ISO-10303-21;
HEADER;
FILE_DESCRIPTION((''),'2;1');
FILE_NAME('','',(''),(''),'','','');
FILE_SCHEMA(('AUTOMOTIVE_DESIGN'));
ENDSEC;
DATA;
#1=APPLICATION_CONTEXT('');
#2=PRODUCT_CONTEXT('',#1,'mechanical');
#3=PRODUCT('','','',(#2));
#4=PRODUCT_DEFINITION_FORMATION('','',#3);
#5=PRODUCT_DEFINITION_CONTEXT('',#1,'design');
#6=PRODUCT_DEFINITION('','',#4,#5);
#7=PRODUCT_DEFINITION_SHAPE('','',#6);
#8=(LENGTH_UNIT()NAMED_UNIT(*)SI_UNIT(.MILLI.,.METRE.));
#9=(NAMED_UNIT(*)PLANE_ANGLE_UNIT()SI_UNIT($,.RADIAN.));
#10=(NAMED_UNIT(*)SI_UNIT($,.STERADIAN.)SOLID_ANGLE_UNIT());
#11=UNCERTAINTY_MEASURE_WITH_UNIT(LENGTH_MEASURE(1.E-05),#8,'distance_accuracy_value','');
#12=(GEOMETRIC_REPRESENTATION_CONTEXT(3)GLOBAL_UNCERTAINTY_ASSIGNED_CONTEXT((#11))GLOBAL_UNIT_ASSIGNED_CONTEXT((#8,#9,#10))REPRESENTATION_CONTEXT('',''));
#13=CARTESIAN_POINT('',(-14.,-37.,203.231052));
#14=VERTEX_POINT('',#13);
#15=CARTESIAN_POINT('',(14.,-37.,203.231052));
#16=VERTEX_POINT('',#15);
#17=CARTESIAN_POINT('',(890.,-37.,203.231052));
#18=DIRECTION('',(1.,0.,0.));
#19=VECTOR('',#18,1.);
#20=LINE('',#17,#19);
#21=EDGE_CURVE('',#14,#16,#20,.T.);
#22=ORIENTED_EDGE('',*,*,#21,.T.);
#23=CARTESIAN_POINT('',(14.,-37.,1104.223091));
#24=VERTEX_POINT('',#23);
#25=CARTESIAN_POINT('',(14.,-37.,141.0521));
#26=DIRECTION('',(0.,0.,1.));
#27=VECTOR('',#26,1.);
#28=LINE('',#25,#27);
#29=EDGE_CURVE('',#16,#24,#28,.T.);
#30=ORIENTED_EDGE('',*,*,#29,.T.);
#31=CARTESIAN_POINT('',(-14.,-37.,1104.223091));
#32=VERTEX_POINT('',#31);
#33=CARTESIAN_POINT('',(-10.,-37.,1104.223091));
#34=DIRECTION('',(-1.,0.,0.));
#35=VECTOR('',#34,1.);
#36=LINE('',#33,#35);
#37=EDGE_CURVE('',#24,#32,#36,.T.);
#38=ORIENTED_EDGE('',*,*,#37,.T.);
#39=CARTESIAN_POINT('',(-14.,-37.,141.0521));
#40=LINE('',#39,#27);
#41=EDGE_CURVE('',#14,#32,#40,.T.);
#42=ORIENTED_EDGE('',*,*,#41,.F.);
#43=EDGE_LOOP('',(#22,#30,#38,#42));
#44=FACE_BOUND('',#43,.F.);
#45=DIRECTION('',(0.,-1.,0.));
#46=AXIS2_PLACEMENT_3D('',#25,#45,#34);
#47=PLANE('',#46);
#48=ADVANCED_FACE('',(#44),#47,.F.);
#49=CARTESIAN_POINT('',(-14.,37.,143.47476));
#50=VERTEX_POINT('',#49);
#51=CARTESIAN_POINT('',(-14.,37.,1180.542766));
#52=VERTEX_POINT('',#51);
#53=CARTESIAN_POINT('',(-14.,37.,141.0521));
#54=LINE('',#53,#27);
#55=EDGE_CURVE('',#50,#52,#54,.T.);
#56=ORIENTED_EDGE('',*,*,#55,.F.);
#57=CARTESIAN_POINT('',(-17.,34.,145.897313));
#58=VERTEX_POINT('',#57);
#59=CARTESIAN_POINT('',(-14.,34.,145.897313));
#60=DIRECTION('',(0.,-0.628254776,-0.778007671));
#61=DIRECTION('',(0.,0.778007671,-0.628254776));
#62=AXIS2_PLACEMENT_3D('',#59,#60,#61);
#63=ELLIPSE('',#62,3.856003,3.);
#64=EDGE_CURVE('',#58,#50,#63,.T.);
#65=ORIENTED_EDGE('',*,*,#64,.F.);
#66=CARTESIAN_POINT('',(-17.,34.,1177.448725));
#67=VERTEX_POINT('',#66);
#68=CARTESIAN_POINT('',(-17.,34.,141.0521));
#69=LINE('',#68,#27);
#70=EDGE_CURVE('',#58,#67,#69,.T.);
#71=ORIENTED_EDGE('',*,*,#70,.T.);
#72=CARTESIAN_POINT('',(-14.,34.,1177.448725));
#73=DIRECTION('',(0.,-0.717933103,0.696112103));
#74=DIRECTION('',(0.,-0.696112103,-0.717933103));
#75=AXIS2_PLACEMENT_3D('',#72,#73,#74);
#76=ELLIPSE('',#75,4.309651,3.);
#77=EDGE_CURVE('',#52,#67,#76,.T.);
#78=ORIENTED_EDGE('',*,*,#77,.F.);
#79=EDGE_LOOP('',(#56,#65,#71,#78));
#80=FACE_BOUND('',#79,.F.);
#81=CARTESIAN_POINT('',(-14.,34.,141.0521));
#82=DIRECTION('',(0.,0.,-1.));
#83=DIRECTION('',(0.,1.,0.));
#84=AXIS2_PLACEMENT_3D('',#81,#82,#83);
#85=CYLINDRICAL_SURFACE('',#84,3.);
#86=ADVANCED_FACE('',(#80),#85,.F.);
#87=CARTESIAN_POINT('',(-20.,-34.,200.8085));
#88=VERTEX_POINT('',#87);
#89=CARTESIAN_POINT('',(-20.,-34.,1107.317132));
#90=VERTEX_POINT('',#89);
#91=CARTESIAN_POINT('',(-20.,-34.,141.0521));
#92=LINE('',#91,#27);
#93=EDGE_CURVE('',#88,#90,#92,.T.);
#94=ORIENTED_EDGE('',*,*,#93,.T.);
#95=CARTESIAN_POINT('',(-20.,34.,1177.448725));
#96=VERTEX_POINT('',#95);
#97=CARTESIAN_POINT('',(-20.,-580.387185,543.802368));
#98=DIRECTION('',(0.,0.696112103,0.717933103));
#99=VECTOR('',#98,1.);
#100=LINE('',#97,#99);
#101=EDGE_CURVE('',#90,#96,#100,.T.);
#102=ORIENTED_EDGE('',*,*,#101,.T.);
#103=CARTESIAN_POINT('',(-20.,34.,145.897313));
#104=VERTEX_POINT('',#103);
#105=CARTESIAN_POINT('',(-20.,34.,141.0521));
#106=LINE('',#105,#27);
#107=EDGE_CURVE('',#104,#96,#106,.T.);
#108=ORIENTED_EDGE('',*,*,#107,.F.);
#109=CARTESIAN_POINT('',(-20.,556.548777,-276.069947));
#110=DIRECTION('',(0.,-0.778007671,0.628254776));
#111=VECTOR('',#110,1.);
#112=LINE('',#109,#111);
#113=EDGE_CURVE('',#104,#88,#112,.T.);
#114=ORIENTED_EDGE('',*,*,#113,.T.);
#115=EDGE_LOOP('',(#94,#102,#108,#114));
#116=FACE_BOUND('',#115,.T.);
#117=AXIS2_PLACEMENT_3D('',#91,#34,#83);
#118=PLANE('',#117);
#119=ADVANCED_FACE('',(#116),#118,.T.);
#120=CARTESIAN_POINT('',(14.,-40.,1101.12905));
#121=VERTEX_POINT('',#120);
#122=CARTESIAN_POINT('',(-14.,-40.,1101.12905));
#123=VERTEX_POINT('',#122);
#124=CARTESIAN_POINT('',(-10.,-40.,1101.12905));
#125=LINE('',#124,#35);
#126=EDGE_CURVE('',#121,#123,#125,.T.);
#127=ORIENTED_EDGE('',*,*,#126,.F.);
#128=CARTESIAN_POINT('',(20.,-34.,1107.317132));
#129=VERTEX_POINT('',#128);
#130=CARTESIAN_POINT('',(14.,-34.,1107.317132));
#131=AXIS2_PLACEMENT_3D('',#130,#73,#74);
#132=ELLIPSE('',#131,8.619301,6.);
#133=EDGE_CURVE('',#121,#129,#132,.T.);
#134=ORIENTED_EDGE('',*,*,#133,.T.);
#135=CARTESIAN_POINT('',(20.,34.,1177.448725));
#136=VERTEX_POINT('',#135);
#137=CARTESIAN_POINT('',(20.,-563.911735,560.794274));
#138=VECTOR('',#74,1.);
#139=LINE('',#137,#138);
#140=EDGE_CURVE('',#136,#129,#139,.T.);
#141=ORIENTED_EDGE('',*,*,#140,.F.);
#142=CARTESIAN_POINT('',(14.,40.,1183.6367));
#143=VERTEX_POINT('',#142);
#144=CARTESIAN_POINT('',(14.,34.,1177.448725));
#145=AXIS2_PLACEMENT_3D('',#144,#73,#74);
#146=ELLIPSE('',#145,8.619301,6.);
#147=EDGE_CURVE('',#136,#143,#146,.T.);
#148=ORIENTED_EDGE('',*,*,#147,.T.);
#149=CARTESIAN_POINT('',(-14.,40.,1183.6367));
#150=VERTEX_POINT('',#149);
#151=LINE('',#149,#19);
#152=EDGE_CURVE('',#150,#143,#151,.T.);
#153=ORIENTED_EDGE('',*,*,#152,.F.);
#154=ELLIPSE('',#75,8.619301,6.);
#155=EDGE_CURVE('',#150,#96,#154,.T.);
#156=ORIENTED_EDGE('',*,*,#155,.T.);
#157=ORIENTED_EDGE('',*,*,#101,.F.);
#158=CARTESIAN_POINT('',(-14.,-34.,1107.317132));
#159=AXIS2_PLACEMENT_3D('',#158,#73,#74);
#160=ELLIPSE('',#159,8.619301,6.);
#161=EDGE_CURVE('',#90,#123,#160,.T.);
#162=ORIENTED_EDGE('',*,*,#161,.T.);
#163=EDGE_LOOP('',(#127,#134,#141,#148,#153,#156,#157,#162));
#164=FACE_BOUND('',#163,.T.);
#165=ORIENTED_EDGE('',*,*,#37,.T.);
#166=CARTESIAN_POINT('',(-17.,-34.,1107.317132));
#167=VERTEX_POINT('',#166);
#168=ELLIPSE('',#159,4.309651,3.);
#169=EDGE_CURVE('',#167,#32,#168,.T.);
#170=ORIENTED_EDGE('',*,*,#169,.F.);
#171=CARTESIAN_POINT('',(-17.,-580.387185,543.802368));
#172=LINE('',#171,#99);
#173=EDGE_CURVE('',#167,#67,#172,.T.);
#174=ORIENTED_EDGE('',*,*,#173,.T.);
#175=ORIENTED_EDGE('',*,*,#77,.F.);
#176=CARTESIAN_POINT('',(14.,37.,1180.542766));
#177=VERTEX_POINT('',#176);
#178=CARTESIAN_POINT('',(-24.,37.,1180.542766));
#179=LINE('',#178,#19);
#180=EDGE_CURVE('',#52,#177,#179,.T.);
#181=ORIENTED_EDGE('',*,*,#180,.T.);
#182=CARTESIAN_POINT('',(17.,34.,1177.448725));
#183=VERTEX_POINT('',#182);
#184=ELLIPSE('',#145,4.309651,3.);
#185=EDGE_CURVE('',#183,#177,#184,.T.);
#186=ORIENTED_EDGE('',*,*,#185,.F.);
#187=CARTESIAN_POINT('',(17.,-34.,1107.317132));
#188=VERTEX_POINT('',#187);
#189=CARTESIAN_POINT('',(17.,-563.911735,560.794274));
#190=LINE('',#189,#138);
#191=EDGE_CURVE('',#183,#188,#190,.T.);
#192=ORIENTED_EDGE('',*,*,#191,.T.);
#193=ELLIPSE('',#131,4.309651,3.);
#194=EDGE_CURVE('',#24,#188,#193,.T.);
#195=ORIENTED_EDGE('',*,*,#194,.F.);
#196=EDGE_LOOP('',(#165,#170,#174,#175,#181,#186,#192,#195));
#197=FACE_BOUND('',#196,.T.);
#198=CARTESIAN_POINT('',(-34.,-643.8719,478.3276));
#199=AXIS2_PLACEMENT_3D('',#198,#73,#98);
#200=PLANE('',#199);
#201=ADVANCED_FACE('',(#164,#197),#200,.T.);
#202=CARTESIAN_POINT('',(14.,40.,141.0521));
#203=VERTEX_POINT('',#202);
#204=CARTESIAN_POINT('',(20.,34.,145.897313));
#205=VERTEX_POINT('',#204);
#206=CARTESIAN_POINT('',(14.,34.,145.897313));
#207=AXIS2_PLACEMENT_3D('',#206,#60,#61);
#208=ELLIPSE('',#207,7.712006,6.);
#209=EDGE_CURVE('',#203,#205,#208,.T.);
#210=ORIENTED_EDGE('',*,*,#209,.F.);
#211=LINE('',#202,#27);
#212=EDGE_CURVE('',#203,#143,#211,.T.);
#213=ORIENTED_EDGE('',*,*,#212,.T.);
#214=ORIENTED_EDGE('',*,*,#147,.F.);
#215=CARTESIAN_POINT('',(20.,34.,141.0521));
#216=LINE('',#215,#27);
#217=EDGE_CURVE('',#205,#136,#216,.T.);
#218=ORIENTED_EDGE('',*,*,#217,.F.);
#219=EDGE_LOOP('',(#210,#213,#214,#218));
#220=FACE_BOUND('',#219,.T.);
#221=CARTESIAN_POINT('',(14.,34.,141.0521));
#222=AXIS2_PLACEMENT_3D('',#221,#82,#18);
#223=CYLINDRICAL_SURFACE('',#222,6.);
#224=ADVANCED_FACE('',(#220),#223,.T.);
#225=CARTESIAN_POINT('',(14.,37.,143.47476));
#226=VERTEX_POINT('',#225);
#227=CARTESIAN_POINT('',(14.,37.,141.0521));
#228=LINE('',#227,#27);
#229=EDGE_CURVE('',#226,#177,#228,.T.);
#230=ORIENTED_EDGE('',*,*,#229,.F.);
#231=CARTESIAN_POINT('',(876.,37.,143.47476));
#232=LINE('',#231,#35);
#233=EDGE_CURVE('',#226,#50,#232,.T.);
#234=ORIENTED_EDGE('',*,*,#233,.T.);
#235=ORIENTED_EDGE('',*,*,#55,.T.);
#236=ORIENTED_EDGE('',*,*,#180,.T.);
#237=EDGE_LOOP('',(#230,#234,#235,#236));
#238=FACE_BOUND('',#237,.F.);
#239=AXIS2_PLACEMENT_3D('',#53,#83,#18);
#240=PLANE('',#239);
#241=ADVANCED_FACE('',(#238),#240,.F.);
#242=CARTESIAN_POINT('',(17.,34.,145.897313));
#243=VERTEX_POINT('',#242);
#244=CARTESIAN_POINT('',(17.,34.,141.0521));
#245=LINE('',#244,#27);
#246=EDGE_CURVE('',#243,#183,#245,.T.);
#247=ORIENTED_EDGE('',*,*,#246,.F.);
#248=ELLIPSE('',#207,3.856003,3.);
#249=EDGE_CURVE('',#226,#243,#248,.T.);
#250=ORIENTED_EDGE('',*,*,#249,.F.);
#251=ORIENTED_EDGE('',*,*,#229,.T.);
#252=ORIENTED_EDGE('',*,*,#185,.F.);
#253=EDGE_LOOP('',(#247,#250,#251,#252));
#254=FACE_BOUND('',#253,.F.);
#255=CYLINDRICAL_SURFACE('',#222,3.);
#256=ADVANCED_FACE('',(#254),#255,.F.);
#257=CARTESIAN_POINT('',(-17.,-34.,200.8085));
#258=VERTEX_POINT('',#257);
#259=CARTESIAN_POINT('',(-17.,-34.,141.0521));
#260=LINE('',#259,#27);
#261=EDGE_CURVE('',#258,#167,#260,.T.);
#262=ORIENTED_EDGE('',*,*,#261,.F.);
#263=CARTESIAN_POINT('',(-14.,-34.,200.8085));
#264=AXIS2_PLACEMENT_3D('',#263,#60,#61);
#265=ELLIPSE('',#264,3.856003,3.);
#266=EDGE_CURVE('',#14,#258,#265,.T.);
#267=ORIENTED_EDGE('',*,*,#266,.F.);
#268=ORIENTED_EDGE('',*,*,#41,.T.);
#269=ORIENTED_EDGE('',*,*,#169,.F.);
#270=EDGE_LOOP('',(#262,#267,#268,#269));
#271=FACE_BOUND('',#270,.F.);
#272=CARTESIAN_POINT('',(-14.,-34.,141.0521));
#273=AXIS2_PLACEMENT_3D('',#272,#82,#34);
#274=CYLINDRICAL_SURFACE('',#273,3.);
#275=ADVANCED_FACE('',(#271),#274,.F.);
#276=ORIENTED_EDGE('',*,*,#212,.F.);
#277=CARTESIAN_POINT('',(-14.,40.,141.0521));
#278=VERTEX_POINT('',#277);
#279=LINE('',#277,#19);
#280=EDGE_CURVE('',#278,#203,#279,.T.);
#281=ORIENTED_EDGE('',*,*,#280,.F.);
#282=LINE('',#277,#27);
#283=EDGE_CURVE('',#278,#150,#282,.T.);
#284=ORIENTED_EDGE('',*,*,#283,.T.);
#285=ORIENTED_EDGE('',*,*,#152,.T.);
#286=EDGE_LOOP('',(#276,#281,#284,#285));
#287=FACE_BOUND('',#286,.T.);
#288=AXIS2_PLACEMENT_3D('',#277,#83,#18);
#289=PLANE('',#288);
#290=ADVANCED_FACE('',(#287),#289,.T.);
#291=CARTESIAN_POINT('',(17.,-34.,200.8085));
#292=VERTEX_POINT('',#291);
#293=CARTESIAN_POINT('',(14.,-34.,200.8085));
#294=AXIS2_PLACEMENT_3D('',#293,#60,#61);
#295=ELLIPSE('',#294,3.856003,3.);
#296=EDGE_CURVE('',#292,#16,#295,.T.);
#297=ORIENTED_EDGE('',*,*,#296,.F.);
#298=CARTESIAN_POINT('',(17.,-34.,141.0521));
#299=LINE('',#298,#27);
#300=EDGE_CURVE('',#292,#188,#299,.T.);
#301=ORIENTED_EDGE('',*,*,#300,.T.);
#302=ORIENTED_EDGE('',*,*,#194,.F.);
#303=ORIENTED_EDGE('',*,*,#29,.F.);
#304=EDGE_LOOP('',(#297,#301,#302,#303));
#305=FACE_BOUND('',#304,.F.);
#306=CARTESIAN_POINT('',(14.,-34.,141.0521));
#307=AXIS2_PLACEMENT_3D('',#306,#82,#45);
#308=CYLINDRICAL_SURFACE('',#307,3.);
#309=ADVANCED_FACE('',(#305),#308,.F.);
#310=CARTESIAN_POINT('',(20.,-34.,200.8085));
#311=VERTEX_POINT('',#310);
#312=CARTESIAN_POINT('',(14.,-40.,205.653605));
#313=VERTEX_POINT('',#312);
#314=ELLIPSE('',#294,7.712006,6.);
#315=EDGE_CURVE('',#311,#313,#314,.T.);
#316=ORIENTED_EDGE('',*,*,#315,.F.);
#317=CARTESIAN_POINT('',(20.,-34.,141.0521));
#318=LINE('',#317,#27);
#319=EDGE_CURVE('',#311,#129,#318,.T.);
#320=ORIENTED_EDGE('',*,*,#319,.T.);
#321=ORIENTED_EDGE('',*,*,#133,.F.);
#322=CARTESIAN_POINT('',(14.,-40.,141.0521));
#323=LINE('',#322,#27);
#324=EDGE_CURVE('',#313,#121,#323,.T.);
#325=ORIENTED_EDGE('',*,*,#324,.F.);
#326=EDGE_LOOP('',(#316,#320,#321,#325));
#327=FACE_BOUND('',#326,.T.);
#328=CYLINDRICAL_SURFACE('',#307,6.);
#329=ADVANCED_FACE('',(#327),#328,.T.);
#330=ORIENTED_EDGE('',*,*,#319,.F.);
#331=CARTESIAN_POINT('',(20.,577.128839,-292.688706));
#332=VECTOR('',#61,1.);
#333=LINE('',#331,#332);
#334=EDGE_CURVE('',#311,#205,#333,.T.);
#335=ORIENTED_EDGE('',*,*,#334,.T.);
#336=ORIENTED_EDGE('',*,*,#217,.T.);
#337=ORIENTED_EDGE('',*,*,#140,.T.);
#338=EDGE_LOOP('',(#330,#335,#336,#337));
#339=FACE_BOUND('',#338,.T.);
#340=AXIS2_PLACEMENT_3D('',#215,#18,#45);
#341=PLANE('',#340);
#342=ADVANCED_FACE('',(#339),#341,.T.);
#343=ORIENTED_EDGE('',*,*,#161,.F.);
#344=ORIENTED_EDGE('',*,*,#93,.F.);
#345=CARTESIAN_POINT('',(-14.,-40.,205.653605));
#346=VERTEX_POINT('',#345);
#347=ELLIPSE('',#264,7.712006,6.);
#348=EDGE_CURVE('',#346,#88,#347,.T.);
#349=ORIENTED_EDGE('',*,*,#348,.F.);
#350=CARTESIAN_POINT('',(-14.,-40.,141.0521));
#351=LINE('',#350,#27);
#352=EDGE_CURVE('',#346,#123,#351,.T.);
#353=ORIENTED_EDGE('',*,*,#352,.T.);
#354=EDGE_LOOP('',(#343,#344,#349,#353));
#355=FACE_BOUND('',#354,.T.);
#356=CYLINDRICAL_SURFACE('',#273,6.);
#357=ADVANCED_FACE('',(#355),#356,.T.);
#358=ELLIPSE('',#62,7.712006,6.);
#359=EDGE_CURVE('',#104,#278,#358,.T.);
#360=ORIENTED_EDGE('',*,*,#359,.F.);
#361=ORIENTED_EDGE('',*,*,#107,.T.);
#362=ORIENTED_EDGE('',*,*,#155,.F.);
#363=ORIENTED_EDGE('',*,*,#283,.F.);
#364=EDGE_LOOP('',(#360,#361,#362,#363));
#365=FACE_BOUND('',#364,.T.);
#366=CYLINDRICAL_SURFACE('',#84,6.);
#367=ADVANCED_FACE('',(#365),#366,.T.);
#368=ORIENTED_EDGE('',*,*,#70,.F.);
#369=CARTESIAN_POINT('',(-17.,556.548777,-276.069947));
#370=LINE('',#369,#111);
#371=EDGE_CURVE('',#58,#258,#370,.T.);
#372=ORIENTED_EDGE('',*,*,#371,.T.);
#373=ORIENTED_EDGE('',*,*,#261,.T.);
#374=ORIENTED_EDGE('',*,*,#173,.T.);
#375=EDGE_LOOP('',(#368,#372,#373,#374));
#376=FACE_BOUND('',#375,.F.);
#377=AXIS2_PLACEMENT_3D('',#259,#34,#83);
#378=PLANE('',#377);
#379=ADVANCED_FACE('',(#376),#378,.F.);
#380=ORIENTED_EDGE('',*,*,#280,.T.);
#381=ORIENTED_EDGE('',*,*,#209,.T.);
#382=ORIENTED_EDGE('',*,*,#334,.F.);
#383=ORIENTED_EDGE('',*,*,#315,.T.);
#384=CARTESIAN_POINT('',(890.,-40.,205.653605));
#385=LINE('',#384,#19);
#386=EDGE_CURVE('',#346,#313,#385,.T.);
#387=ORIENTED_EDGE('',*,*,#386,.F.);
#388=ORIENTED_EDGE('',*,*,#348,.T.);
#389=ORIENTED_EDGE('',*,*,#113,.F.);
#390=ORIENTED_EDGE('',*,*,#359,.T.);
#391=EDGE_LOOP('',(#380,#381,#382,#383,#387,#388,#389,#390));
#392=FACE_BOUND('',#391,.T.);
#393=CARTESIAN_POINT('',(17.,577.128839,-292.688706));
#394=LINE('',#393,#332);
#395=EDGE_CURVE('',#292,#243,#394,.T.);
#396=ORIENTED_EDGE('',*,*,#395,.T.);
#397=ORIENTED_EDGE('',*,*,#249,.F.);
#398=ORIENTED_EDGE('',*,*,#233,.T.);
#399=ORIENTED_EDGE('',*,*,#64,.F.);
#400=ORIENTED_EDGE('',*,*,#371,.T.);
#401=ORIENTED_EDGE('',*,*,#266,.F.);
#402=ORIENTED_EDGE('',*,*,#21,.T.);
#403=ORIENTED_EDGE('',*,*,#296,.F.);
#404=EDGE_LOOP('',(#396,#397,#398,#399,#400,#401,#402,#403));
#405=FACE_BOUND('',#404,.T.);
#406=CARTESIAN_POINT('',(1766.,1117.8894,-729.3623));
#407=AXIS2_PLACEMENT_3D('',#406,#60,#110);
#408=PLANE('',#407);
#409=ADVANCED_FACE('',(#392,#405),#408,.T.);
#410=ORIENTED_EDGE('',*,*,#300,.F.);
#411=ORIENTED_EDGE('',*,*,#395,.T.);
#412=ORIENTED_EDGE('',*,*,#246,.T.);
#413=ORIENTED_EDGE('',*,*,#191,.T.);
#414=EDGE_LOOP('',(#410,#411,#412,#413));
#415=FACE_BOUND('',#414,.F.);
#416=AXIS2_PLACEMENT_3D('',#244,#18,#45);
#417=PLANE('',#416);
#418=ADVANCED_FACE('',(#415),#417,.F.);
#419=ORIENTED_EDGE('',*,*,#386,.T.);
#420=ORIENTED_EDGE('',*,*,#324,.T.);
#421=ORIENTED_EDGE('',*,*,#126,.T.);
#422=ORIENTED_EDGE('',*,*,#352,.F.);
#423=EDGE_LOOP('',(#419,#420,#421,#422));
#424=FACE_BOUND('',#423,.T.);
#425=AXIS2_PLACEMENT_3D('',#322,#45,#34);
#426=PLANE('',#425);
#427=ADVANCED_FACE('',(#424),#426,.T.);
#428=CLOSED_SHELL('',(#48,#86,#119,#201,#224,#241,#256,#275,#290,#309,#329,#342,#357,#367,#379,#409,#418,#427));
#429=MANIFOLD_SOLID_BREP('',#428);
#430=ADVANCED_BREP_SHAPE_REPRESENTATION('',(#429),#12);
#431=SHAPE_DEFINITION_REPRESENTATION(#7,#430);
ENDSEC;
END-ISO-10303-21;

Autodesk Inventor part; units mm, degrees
ref_plane "Start Plane" through (0, 0, 141.0521) normal (0, 0, 1) x (1, 0, 0)
ref_plane "End Plane" through (0, 0, 1183.6367) normal (0, 0, 1) x (1, 0, 0)
sketch "Sketch" plane through (0, 0, 0) normal (0, 0, 1) x (1, 0, 0)
  line L0 (-20, -34) -> (-20, 34)
  line L1 (-14, 40) -> (14, 40)
  line L2 (20, 34) -> (20, -34)
  line L3 (14, -40) -> (-14, -40)
  arc A0 (-20, -34) -> (-14, -40) centre (-14, -34) ccw
  arc A1 (20, 34) -> (14, 40) centre (14, 34) ccw
  arc A2 (-14, 40) -> (-20, 34) centre (-14, 34) ccw
  arc A3 (14, -40) -> (20, -34) centre (14, -34) ccw
  arc A4 (-14, 37) -> (-17, 34) centre (-14, 34) ccw
  line L4 (-14, 37) -> (14, 37)
  arc A5 (17, 34) -> (14, 37) centre (14, 34) ccw
  line L5 (17, 34) -> (17, -34)
  arc A6 (14, -37) -> (17, -34) centre (14, -34) ccw
  line L6 (14, -37) -> (-14, -37)
  arc A7 (-17, -34) -> (-14, -37) centre (-14, -34) ccw
  line L7 (-17, -34) -> (-17, 34)
  line L8 (0, 57.7397) -> (0, -57.7397) construction
  line L9 (-29.7397, 0) -> (29.7397, 0) construction
  dimension "d7" = 6
  dimension "d9" = 40
  dimension "d11" = 80
  dimension "d12" = 3
  dimension "d15" = 20
  dimension "d16" = 40
extrude "Body" add sketch "Sketch" along normal up to surface (1042.5846 mm away) from surface at 141.0521
sketch "Sketch3" plane through (0, 0, 0) normal (0, 0, 1) x (1, 0, 0)
  line L0 (0, 0) -> (10, 0)
ref_plane "Work Plane3" through (0, 0, 0) normal (0, -1, 0) x (1, 0, 0)
ref_plane "Work Plane4" through (1766, 1117.8894, -729.3623) normal (0, -0.6282548, -0.7780077) x (1, 0, 0)
split "Split1" plane through (1766, 1117.8894, -729.3623) removes the side toward (0, -0.6282548, -0.7780077)
ref_plane "Work Plane5" through (-34, -643.8719, 478.3276) normal (0, -0.7179331, 0.6961121) x (1, 0, 0)
split "Split2" plane through (-34, -643.8719, 478.3276) removes the side toward (0, -0.7179331, 0.6961121)
sketch "Sketch4" plane through (0, 0, 0) normal (0, -1, 0) x (1, 0, 0)
  line L0 (-2, 141.0521) -> (12, 141.0521) projected
  line L1 (-2, 1183.6367) -> (12, 1183.6367) projected
  dimension "d18" = 1042.5846
equation "\"d7\" = G_IR"
equation "\"d9\" = G_W"
equation "\"d11\" = G_H"
equation "\"d12\" = G_T"
equation "\"d15\" = 0.5 * d9"
equation "\"d16\" = 0.5 * d11"
equation "\"d3\" = G_L"
equation "\"G_W\" = 40"
equation "\"G_H\" = 80"
equation "\"G_T\" = 3"
equation "\"G_IR\" = 6"
equation "\"G_L\" = d18"
equation "\"G_OFFSET_START\" = -141.0521"
equation "\"G_OFFSET_END\" = -32.41626"
equation "\"d13\" = -G_OFFSET_START"
equation "\"d14\" = G_OFFSET_END + B_L"
equation "\"B_L\" = 1216.05295"
properties part number "ISO 10799-2 - 80x40x3 - 1042,58" material "Steel, Mild"
